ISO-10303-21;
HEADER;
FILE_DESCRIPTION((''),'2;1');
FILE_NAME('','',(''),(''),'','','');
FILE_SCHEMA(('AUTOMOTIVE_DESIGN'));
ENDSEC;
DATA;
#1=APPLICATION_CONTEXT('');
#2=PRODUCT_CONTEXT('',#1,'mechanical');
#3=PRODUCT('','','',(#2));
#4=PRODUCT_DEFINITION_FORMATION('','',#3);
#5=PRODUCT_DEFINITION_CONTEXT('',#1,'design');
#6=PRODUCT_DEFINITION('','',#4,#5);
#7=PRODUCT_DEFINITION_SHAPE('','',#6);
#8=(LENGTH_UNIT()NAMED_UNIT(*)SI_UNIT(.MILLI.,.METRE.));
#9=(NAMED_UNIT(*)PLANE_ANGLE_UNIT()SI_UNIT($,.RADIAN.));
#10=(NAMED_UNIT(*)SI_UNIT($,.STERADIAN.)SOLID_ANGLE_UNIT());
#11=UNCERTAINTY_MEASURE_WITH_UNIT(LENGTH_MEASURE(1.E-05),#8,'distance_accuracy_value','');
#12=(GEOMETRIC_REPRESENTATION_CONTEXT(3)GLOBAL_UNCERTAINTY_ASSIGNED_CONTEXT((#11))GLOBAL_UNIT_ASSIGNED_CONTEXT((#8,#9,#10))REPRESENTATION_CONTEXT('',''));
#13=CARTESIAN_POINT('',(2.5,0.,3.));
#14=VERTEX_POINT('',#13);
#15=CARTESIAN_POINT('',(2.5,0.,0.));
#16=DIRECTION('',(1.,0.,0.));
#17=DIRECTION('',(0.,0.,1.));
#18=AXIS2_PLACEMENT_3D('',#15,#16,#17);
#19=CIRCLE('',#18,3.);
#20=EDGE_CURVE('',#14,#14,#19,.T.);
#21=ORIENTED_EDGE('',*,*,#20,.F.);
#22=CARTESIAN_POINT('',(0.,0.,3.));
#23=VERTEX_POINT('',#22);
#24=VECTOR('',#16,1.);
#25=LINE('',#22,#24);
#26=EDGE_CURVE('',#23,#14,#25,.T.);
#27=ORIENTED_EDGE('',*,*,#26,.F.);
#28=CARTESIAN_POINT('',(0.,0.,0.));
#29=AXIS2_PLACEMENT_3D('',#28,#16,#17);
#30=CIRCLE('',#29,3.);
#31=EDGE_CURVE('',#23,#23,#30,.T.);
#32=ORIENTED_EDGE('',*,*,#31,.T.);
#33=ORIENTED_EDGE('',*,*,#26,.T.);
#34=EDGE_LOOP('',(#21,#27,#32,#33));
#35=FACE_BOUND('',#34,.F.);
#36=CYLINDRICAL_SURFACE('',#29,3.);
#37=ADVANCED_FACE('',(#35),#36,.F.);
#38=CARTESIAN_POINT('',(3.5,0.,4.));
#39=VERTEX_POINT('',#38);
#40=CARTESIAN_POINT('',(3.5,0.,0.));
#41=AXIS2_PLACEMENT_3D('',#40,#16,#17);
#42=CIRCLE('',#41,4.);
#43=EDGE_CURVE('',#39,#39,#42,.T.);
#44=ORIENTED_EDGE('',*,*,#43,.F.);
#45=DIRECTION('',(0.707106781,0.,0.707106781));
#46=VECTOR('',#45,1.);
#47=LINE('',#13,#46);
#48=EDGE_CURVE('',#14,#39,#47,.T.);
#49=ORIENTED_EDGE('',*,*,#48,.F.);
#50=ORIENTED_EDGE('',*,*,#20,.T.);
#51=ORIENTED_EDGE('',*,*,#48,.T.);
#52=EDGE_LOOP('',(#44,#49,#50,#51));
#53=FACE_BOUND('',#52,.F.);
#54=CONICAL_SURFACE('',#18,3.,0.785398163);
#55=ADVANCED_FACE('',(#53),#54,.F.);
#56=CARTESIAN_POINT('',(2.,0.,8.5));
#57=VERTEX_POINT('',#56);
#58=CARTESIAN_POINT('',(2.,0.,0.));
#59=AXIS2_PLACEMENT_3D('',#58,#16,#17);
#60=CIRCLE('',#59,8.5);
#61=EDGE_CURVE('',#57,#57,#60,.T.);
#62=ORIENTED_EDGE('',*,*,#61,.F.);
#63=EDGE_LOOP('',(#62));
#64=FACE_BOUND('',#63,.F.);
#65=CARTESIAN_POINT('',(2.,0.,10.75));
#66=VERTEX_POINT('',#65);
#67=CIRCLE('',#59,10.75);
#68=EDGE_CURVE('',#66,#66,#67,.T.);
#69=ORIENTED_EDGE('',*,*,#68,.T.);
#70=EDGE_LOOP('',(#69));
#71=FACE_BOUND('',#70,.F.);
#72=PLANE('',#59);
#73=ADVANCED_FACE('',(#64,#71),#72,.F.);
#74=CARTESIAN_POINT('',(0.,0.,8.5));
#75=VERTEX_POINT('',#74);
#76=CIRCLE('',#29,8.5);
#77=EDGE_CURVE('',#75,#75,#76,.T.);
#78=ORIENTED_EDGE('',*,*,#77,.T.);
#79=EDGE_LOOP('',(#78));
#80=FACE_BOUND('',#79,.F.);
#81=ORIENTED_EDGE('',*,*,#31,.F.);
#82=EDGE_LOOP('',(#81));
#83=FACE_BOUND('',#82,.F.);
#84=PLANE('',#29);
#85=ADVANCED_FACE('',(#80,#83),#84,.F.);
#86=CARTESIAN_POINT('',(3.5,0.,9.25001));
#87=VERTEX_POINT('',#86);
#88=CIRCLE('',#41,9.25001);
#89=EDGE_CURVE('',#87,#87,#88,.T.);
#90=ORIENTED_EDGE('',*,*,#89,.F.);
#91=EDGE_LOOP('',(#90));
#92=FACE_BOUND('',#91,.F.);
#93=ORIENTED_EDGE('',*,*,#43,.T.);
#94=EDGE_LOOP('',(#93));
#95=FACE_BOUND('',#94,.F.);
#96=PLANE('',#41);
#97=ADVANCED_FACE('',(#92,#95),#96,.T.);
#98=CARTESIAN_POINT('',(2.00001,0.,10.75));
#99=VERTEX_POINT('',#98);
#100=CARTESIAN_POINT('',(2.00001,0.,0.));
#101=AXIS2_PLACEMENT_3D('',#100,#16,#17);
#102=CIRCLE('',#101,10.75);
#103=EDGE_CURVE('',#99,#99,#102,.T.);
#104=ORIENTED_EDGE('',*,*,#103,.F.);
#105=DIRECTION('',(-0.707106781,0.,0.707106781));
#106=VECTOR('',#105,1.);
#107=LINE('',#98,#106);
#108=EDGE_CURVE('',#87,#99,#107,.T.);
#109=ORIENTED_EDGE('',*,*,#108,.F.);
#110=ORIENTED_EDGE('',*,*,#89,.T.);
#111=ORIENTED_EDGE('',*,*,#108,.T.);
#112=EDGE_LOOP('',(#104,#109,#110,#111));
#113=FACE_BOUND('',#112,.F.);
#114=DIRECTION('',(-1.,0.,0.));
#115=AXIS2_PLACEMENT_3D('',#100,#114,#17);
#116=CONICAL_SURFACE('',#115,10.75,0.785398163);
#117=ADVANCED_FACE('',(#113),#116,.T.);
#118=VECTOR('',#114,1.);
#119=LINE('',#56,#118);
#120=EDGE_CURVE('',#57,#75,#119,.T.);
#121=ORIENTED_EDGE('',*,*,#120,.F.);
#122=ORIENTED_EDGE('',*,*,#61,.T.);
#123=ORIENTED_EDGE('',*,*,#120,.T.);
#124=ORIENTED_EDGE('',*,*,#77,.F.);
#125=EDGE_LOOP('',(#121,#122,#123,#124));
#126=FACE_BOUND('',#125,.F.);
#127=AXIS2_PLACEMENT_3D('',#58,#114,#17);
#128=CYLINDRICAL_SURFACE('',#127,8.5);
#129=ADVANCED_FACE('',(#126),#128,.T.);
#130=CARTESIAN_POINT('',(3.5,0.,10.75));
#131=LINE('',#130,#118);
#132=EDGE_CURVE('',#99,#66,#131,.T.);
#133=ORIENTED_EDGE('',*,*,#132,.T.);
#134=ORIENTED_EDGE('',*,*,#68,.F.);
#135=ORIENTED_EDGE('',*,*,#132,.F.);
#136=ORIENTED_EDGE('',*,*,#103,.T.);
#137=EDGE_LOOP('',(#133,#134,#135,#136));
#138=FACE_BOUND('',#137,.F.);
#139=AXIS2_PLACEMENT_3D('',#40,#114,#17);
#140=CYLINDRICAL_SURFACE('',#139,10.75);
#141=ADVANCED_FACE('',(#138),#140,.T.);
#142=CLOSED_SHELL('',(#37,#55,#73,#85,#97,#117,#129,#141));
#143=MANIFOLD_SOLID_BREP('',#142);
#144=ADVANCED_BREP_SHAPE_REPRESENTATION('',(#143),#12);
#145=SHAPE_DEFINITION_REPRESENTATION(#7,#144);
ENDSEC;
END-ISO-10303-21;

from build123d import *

# Parameters (mm, degrees)
F2_SIZE = 1
F3_SIZE = 1.49999


# Not quite as in the source:
# - a fillet or chamfer is up to 0.001 mm smaller than in the source, because OpenCascade refuses the exact size


with BuildPart() as f1:
    # F0 (on Front) → F1 (revolve)
    with BuildSketch(Plane.XZ):
        Polygon((0, 8.5), (0, 3), (3.5, 3), (3.5, 10.75), (2, 10.75), (2, 8.5), align=None)
    revolve(axis=Axis((1.1402515594, 0, 0), (1, 0, 0)))

    # F2
    f2_edges = [f1.edges().sort_by_distance(p)[0] for p in [
        (3.5, 0, -3),
    ]]
    chamfer(f2_edges, length=F2_SIZE)

    # F3 (size 1.5 in the source; OpenCascade refuses exactly that, so slightly less here)
    f3_edges = [f1.edges().sort_by_distance(p)[0] for p in [
        (3.5, 0, -10.75),
    ]]
    chamfer(f3_edges, length=F3_SIZE)


solid = f1.part
